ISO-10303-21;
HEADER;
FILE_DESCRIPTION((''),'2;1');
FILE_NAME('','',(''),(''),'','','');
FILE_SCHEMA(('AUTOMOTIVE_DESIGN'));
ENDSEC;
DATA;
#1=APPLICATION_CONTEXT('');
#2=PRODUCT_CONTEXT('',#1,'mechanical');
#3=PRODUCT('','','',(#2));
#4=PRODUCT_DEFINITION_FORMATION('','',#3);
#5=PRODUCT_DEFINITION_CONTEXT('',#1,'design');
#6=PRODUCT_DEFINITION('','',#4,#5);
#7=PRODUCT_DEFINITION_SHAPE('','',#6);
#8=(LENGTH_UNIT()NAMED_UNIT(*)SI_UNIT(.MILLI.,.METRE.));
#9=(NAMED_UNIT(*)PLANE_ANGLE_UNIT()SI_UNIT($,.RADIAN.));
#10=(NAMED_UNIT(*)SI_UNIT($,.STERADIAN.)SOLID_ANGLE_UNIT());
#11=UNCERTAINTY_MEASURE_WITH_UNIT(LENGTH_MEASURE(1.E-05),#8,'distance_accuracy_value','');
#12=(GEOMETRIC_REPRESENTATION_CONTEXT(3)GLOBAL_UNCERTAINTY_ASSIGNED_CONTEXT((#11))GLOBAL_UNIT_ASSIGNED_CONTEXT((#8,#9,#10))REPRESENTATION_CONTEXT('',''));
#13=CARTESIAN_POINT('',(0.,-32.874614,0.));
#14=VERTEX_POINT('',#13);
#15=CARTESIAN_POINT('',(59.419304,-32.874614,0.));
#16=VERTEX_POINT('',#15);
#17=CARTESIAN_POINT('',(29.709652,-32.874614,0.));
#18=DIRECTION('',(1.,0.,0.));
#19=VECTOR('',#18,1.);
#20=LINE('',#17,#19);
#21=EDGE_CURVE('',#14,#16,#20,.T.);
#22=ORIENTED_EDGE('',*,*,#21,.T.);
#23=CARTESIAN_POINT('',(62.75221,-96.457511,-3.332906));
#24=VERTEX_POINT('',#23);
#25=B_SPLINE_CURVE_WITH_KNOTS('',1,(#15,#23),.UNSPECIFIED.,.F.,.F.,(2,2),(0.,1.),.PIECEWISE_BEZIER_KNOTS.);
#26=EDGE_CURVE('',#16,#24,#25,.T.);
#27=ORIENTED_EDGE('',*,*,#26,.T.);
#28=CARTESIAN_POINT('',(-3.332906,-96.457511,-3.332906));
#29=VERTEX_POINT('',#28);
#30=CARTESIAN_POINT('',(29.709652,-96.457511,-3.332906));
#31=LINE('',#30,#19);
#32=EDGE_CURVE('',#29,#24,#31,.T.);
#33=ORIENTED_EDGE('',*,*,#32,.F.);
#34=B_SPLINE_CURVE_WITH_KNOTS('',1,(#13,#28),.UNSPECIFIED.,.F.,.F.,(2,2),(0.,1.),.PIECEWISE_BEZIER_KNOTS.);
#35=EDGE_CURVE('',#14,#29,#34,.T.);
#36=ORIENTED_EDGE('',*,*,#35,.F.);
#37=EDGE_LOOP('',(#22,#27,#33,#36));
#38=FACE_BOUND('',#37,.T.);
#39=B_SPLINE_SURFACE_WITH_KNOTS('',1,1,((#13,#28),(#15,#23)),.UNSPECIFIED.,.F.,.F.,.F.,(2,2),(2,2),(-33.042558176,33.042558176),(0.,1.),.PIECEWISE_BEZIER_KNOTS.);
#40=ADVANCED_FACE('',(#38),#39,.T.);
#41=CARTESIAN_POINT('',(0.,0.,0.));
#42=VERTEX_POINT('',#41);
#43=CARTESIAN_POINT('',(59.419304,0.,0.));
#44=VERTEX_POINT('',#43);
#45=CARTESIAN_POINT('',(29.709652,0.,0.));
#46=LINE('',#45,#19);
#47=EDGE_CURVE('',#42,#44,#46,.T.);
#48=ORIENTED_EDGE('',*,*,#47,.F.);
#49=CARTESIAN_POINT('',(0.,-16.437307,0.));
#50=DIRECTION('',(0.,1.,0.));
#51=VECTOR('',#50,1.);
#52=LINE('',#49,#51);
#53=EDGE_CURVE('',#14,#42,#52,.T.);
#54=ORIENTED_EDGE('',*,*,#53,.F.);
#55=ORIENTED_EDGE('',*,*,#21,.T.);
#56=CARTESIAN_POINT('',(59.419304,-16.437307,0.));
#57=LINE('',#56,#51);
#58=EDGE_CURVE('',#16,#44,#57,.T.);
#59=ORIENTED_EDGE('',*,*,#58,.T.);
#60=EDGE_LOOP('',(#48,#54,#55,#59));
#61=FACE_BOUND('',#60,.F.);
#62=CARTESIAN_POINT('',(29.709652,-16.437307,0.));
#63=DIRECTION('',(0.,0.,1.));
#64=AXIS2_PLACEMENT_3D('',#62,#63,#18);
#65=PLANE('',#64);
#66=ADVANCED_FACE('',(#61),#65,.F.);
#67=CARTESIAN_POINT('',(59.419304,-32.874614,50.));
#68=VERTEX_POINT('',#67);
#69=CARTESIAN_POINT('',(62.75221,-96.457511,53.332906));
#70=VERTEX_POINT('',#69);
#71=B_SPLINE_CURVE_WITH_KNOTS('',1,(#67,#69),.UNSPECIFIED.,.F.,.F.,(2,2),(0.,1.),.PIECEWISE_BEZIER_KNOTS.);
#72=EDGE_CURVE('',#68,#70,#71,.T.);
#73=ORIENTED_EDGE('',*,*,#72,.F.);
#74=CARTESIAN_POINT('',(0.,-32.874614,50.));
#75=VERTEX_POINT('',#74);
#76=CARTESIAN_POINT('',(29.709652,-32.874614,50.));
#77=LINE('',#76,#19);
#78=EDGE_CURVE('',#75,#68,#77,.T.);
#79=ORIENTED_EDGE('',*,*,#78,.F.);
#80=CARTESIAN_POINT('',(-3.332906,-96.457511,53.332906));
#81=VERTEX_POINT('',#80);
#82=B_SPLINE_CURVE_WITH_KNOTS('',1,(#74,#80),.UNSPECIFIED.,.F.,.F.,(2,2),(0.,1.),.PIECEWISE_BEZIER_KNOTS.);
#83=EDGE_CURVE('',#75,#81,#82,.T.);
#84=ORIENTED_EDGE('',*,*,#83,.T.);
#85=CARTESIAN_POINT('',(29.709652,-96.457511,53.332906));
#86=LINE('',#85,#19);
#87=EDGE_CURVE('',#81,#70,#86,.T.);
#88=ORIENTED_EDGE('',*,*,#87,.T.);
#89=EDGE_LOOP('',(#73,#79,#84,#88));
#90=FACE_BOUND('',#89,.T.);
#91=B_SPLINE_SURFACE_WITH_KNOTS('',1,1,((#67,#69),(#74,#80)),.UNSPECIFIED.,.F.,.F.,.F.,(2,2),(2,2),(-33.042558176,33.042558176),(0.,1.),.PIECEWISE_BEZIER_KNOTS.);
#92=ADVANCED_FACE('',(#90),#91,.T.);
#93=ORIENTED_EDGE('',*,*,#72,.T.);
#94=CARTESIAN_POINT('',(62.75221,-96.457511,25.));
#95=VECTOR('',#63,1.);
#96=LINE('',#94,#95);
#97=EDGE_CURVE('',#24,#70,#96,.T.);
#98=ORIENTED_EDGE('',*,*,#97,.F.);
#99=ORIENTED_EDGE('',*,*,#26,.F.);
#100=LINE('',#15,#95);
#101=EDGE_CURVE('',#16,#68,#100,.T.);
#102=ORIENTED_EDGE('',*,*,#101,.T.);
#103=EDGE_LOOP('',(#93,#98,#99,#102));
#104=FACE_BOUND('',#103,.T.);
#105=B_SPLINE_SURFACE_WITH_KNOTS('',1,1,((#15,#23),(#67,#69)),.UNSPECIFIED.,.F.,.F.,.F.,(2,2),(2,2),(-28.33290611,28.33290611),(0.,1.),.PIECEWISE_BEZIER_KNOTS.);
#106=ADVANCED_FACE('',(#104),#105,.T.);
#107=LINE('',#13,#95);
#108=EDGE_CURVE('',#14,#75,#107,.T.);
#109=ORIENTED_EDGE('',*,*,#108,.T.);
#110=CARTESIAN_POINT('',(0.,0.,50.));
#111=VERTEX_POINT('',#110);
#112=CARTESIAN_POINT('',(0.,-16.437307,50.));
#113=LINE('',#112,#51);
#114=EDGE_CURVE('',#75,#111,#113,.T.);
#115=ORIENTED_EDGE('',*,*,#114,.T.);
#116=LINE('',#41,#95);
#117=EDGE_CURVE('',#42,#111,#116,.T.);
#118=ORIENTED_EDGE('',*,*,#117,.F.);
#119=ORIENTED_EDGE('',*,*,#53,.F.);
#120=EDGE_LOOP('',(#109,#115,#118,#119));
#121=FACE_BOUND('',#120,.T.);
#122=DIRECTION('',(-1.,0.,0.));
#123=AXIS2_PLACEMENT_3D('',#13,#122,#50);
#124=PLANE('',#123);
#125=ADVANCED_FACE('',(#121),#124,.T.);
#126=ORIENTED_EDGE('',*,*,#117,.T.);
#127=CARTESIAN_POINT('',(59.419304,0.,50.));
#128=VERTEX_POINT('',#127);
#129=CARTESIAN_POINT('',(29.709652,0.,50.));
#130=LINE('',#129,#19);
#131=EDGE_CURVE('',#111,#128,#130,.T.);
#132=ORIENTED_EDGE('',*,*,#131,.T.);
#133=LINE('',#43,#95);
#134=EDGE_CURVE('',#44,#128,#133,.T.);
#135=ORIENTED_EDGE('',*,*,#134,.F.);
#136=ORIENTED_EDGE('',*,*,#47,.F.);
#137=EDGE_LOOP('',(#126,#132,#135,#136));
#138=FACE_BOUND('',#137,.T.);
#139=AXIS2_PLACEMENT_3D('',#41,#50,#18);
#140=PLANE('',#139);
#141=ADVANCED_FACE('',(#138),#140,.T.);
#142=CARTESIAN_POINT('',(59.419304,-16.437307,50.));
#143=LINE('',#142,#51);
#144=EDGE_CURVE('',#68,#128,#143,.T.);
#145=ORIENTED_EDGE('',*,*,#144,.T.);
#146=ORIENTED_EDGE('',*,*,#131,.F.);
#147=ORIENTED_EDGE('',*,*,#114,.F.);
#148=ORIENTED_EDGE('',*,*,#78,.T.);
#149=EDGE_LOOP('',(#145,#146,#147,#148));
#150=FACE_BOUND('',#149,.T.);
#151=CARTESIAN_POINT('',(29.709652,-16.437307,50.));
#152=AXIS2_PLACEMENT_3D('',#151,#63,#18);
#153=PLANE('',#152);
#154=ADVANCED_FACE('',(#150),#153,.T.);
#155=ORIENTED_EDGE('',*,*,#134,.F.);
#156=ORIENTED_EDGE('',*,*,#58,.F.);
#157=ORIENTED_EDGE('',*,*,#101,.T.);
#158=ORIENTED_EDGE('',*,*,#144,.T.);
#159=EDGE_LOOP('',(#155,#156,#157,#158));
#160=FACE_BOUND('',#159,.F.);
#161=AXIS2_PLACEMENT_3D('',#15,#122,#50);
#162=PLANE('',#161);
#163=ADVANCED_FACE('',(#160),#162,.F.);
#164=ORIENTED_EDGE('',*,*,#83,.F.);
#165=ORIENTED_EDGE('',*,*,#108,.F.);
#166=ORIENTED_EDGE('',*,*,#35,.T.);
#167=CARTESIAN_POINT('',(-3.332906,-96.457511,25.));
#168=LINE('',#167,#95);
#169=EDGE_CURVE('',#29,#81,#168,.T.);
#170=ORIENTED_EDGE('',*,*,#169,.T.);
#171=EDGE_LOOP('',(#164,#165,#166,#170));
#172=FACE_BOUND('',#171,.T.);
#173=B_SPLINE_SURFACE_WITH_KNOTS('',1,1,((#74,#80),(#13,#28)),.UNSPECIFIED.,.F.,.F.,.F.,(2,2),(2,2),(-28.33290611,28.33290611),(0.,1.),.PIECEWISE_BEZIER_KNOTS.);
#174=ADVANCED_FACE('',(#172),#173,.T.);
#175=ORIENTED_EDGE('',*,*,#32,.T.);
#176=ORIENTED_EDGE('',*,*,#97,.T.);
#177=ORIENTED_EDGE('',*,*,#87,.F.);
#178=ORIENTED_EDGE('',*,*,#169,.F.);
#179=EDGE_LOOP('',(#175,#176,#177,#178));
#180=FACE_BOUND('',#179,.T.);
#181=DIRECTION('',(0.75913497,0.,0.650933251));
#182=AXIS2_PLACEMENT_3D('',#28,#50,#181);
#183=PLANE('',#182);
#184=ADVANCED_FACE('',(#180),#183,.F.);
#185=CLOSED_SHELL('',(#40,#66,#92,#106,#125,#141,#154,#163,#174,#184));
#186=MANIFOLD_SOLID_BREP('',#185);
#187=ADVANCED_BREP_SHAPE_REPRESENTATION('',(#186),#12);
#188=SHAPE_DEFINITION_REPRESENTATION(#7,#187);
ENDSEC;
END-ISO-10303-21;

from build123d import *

# Parameters (mm, degrees)
F0_W      = 59.4193041325
F0_H      = 32.8746140003
F1_DEPTH  = 50
F1_FACE_W = 59.4193041325
F1_FACE_H = 50
F2_DEPTH  = 63.5828971863
F2_TAPER  = -3.0006


with BuildPart() as f1:
    # F0 (on Top) → F1 (new body)
    with BuildSketch(Plane.XY):
        with Locations((29.7096520662, -16.4373070002)):
            Rectangle(F0_W, F0_H)
    extrude(amount=F1_DEPTH)

    # F1_face (on face) → F2 (join)
    with BuildSketch(Plane(origin=(29.7096520662, -32.8746140003, 25), x_dir=(1, 0, 0), z_dir=(0, -1, 0))):
        Rectangle(F1_FACE_W, F1_FACE_H)
    extrude(amount=F2_DEPTH, taper=F2_TAPER)


solid = f1.part
